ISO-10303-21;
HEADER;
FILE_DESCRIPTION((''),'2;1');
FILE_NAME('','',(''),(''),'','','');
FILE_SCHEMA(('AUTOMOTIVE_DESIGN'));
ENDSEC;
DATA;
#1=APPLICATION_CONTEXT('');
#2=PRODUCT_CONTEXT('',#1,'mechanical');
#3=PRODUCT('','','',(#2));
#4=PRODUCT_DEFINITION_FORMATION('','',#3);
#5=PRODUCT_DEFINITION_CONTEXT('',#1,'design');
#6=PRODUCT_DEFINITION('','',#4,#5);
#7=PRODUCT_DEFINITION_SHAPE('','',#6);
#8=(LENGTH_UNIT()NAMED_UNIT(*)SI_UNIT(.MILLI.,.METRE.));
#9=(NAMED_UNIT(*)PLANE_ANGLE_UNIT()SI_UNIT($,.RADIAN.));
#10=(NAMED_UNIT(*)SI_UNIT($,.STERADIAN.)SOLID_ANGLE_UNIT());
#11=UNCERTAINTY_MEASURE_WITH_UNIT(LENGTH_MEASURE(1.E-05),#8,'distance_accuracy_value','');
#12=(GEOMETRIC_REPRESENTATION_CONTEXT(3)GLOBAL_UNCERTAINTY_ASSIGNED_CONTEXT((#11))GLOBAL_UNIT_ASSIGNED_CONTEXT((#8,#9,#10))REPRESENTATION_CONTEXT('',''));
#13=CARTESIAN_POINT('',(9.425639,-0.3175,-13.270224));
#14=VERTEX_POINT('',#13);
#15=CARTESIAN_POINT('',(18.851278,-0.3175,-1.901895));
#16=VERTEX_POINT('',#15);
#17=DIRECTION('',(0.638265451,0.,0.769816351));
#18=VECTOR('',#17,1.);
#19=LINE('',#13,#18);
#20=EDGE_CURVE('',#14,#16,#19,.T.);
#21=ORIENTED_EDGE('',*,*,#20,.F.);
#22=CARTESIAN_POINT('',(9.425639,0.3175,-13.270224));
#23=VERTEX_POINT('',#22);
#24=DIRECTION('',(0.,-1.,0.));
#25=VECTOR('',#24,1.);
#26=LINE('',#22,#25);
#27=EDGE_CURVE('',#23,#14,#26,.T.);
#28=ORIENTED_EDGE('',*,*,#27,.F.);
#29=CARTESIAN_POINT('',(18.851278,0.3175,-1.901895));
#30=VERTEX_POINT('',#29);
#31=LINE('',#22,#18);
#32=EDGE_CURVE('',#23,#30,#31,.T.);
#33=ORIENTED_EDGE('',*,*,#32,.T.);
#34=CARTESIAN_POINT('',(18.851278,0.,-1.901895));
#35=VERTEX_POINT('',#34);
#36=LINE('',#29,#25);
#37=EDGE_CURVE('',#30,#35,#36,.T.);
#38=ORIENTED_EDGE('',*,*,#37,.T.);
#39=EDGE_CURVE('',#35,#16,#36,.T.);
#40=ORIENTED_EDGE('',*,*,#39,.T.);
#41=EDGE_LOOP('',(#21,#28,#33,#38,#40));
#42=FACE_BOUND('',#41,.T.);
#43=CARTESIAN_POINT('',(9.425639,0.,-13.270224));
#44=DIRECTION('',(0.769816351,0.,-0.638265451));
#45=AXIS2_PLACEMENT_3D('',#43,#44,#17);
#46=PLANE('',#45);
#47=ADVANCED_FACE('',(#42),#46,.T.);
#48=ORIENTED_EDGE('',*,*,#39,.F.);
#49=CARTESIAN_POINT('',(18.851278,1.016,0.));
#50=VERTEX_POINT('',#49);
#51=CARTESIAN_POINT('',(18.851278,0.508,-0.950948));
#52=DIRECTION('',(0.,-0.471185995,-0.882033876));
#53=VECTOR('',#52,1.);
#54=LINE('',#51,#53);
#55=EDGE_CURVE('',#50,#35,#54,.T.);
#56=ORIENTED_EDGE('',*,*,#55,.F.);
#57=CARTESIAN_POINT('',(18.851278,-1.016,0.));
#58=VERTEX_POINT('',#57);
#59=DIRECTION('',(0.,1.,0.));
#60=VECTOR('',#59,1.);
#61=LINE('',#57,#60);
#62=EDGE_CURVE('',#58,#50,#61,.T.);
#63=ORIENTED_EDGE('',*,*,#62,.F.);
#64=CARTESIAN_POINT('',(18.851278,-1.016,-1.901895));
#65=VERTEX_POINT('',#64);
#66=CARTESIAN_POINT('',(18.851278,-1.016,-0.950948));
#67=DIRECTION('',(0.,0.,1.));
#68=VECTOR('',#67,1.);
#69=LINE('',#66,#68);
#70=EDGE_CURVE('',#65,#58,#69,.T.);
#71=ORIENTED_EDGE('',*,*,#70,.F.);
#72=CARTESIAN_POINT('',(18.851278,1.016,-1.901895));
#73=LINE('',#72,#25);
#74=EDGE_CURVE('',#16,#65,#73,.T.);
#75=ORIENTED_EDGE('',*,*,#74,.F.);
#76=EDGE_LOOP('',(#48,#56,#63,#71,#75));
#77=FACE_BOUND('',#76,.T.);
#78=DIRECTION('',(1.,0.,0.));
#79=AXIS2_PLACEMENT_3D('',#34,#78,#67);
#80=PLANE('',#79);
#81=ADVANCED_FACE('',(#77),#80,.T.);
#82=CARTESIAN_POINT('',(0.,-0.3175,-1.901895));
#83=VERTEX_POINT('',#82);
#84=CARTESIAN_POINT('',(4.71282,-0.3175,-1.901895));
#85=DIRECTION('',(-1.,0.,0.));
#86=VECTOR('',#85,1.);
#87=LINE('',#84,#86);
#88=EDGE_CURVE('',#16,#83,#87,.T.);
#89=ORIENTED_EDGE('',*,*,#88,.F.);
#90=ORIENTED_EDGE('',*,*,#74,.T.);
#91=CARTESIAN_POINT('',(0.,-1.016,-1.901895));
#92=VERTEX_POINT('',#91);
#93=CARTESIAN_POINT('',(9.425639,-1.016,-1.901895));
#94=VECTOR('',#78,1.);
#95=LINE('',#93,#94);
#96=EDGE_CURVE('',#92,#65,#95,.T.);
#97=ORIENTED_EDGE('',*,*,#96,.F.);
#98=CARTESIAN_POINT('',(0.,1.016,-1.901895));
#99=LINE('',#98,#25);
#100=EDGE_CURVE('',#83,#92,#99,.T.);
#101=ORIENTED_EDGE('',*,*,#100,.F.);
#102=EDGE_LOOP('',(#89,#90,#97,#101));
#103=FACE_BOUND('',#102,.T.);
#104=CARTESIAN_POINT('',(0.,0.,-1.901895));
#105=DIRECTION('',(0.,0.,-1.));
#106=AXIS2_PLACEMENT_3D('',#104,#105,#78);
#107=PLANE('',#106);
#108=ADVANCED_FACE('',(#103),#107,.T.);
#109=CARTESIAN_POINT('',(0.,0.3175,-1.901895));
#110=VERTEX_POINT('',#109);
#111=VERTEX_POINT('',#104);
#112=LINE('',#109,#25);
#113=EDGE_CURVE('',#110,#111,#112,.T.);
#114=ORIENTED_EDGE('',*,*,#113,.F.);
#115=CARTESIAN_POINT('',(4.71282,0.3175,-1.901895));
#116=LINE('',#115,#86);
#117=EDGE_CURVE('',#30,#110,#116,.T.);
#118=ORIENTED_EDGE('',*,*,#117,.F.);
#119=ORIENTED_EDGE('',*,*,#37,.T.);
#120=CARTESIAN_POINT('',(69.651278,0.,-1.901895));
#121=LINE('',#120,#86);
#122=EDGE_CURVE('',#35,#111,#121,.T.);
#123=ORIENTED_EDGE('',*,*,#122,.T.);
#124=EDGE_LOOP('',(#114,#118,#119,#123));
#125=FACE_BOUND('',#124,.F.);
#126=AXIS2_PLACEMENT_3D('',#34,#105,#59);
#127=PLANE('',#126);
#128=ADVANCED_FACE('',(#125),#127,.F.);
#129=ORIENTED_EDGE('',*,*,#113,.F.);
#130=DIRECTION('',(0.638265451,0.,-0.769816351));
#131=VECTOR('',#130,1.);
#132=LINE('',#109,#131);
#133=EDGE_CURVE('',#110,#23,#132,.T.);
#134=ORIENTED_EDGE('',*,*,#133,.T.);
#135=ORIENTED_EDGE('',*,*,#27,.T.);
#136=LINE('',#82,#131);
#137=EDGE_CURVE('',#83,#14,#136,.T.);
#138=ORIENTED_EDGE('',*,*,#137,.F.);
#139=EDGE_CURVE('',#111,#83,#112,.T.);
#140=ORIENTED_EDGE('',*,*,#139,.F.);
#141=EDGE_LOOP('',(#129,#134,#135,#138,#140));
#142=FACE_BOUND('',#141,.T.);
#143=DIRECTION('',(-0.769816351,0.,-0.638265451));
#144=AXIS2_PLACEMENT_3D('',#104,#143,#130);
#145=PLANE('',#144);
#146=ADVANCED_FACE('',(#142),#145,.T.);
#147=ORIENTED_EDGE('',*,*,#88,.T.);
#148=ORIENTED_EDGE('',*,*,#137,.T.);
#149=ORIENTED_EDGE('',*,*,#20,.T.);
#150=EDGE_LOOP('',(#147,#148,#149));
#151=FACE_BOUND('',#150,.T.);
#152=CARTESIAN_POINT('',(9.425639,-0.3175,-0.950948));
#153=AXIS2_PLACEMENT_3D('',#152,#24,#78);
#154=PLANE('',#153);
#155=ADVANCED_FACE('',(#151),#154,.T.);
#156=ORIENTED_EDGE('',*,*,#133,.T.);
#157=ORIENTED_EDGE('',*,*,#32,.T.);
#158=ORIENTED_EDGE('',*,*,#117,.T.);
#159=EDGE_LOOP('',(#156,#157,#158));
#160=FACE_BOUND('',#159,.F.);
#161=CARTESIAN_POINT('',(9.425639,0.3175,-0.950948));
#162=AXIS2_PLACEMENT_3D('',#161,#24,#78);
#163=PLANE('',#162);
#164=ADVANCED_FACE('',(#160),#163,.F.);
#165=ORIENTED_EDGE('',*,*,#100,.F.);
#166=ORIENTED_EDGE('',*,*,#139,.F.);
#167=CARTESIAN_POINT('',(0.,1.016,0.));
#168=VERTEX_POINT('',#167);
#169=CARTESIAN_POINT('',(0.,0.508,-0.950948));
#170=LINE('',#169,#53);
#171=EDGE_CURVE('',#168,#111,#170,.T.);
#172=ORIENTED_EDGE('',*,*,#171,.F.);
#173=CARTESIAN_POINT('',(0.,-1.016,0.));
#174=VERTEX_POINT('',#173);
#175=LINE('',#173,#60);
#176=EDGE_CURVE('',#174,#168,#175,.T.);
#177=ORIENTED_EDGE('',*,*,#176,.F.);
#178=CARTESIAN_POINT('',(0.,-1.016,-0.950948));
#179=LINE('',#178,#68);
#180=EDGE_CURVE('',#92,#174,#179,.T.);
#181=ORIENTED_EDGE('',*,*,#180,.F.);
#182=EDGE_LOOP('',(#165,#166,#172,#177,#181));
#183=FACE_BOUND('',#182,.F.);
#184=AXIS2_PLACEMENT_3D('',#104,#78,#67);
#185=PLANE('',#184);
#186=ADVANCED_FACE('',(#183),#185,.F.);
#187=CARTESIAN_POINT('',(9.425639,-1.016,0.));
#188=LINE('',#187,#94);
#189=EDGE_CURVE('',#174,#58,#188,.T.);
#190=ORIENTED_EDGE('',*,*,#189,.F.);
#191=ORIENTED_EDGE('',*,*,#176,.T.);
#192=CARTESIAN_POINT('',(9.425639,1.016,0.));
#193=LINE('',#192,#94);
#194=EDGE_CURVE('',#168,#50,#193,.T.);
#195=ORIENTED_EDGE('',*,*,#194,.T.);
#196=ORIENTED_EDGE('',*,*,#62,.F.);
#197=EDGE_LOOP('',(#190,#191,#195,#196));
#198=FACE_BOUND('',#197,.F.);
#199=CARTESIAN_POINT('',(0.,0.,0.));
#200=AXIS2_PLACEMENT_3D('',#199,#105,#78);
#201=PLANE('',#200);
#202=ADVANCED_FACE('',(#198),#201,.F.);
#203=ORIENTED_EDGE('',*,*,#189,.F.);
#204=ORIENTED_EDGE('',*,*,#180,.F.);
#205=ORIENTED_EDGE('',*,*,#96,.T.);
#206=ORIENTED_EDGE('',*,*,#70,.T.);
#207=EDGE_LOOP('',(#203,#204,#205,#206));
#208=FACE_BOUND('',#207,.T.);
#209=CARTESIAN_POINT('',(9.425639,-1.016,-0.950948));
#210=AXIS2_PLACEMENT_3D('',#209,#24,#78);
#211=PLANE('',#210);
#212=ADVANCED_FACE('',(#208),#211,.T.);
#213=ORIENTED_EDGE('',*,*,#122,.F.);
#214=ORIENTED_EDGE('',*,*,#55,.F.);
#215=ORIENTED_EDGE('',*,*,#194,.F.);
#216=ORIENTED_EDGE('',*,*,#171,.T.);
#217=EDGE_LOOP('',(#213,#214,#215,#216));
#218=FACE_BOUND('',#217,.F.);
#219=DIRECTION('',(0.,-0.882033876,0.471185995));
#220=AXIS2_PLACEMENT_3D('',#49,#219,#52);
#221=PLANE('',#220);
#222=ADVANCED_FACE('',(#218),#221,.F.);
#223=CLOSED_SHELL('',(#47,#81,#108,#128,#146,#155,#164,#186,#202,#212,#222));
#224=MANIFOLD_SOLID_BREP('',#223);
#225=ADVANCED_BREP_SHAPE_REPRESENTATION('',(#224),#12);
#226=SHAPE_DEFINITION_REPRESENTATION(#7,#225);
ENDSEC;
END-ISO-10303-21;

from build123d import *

# Parameters (mm, degrees)
F0_W     = 18.8512783498
F0_H     = 1.9018952735
F1_DEPTH = 1.016
F2_DEPTH = 0.3175
F4_DEPTH = 50.8


with BuildPart() as f1:
    # F0 (on Front) → F1 (new body, symmetric)
    with BuildSketch(Plane.XZ):
        with Locations((9.4256391749, -0.9509476367)):
            Rectangle(F0_W, F0_H)
    extrude(amount=F1_DEPTH, both=True)

    # F0 (on Front) → F2 (join, symmetric)
    with BuildSketch(Plane.XZ):
        with Locations((9.4256391749, -0.9509476367)):
            Rectangle(F0_W, F0_H)
        Polygon((18.8512783498, -1.9018952735), (0, -1.9018952735), (9.4256391749, -13.2702235132), align=None)
    extrude(amount=F2_DEPTH, both=True)

    # F3 (on face) → F4 (cut, symmetric)
    with BuildSketch(Plane.YZ.offset(18.8512783498)):
        Polygon((1.016, -1.9018952735), (1.016, 0), (0, -1.9018952735), (0.3175, -1.9018952735), align=None)
    extrude(amount=F4_DEPTH, both=True, mode=Mode.SUBTRACT)


solid = f1.part
